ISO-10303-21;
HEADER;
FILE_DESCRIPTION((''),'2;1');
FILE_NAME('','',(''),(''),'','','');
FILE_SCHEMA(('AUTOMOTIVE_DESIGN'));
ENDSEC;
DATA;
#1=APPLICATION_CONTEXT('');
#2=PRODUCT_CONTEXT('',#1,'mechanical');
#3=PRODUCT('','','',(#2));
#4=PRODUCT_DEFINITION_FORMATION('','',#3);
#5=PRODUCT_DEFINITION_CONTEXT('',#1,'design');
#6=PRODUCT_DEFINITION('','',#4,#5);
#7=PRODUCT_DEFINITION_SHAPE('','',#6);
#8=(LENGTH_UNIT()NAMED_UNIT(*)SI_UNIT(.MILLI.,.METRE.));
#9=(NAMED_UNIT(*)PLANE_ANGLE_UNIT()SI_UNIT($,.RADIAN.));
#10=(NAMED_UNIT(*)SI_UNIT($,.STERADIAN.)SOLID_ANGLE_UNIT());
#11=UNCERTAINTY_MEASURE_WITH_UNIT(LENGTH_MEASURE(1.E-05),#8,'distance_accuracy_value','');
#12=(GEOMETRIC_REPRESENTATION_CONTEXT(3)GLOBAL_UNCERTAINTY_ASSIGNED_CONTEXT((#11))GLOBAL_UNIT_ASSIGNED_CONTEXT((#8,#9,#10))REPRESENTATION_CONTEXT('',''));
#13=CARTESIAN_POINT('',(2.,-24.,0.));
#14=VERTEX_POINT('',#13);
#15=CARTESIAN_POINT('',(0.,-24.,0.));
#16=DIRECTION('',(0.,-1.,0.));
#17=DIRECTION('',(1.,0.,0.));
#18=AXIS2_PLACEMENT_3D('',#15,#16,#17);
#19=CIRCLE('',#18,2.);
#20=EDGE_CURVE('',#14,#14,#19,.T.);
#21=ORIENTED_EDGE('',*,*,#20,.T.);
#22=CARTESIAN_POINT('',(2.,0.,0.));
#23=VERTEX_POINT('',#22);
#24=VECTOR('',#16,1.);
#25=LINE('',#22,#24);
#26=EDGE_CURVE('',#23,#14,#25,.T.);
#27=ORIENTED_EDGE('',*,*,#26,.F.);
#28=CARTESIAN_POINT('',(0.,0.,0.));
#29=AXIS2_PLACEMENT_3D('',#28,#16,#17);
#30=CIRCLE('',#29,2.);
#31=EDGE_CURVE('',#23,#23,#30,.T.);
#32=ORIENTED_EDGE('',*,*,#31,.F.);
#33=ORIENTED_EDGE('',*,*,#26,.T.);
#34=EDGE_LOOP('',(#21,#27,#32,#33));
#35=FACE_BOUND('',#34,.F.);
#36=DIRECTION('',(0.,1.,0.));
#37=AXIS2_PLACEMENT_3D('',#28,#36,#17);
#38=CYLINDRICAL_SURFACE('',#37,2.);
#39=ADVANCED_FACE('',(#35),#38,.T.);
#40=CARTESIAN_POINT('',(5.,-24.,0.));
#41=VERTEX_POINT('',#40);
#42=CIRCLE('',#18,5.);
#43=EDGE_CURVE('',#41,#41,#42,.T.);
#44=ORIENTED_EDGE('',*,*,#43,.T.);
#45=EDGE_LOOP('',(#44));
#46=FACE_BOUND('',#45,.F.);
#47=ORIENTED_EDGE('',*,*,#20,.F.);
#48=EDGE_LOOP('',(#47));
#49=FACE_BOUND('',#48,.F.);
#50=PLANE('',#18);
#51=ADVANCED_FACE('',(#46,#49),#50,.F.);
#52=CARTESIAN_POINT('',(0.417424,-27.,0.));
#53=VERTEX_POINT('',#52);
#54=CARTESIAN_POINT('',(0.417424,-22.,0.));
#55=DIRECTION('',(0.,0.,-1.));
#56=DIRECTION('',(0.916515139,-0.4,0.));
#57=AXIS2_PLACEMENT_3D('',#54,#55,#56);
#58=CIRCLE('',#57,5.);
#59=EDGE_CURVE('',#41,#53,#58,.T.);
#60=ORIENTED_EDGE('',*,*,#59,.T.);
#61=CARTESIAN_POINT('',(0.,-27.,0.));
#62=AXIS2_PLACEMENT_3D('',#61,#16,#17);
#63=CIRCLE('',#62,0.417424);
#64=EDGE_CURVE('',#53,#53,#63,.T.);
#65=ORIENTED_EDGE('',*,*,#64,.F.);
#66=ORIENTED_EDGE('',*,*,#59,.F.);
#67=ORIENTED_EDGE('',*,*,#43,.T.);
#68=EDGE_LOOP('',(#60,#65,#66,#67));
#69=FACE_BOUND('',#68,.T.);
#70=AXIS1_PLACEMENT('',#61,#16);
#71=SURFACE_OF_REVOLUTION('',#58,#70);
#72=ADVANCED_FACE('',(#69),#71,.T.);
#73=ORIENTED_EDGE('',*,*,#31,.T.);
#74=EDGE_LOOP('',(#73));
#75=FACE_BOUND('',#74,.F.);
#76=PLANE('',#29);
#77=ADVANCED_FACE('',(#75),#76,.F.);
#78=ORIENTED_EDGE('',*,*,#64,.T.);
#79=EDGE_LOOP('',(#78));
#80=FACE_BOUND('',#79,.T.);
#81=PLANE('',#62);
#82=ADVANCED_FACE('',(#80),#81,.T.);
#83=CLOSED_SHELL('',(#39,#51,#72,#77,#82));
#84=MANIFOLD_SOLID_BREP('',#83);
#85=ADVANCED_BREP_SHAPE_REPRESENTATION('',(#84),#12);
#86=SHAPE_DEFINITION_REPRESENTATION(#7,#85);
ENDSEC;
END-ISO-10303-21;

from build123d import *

# Parameters (mm, degrees)
F0_R     = 2
F1_DEPTH = 24
F2_R     = 5
F2_R_2   = 2
F3_DEPTH = 3


# Not quite as in the source:
# - a fillet or chamfer that OpenCascade refuses, or shapes differently, is made with other operations: its cross-section is extruded or revolved along the edge and cut away or added


with BuildPart() as f1:
    # F0 (on Front) → F1 (new body)
    with BuildSketch(Plane.XZ):
        Circle(F0_R)
    extrude(amount=F1_DEPTH)

    # F2 (on face) → F3 (join)
    with BuildSketch(Plane.XZ.offset(24)):
        Circle(F2_R)
        Circle(F2_R_2, mode=Mode.SUBTRACT)
        Circle(F2_R_2)
    extrude(amount=F3_DEPTH)

    # F4: fillet of radius 5 on 1 edges, made by hand

    # F4_s1 → F4_t2 (revolve, cut)
    with BuildSketch(Plane.XY):
        with BuildLine():
            ThreePointArc((5, -24), (3.1560370926, -26.1833001327), (0.417424305, -27))
            Line((0.417424305, -27), (5, -27))
            Line((5, -27), (5, -24))
        make_face()
    revolve(axis=Axis((0, -27, 0), (0, -1, 0)), mode=Mode.SUBTRACT)


solid = f1.part
